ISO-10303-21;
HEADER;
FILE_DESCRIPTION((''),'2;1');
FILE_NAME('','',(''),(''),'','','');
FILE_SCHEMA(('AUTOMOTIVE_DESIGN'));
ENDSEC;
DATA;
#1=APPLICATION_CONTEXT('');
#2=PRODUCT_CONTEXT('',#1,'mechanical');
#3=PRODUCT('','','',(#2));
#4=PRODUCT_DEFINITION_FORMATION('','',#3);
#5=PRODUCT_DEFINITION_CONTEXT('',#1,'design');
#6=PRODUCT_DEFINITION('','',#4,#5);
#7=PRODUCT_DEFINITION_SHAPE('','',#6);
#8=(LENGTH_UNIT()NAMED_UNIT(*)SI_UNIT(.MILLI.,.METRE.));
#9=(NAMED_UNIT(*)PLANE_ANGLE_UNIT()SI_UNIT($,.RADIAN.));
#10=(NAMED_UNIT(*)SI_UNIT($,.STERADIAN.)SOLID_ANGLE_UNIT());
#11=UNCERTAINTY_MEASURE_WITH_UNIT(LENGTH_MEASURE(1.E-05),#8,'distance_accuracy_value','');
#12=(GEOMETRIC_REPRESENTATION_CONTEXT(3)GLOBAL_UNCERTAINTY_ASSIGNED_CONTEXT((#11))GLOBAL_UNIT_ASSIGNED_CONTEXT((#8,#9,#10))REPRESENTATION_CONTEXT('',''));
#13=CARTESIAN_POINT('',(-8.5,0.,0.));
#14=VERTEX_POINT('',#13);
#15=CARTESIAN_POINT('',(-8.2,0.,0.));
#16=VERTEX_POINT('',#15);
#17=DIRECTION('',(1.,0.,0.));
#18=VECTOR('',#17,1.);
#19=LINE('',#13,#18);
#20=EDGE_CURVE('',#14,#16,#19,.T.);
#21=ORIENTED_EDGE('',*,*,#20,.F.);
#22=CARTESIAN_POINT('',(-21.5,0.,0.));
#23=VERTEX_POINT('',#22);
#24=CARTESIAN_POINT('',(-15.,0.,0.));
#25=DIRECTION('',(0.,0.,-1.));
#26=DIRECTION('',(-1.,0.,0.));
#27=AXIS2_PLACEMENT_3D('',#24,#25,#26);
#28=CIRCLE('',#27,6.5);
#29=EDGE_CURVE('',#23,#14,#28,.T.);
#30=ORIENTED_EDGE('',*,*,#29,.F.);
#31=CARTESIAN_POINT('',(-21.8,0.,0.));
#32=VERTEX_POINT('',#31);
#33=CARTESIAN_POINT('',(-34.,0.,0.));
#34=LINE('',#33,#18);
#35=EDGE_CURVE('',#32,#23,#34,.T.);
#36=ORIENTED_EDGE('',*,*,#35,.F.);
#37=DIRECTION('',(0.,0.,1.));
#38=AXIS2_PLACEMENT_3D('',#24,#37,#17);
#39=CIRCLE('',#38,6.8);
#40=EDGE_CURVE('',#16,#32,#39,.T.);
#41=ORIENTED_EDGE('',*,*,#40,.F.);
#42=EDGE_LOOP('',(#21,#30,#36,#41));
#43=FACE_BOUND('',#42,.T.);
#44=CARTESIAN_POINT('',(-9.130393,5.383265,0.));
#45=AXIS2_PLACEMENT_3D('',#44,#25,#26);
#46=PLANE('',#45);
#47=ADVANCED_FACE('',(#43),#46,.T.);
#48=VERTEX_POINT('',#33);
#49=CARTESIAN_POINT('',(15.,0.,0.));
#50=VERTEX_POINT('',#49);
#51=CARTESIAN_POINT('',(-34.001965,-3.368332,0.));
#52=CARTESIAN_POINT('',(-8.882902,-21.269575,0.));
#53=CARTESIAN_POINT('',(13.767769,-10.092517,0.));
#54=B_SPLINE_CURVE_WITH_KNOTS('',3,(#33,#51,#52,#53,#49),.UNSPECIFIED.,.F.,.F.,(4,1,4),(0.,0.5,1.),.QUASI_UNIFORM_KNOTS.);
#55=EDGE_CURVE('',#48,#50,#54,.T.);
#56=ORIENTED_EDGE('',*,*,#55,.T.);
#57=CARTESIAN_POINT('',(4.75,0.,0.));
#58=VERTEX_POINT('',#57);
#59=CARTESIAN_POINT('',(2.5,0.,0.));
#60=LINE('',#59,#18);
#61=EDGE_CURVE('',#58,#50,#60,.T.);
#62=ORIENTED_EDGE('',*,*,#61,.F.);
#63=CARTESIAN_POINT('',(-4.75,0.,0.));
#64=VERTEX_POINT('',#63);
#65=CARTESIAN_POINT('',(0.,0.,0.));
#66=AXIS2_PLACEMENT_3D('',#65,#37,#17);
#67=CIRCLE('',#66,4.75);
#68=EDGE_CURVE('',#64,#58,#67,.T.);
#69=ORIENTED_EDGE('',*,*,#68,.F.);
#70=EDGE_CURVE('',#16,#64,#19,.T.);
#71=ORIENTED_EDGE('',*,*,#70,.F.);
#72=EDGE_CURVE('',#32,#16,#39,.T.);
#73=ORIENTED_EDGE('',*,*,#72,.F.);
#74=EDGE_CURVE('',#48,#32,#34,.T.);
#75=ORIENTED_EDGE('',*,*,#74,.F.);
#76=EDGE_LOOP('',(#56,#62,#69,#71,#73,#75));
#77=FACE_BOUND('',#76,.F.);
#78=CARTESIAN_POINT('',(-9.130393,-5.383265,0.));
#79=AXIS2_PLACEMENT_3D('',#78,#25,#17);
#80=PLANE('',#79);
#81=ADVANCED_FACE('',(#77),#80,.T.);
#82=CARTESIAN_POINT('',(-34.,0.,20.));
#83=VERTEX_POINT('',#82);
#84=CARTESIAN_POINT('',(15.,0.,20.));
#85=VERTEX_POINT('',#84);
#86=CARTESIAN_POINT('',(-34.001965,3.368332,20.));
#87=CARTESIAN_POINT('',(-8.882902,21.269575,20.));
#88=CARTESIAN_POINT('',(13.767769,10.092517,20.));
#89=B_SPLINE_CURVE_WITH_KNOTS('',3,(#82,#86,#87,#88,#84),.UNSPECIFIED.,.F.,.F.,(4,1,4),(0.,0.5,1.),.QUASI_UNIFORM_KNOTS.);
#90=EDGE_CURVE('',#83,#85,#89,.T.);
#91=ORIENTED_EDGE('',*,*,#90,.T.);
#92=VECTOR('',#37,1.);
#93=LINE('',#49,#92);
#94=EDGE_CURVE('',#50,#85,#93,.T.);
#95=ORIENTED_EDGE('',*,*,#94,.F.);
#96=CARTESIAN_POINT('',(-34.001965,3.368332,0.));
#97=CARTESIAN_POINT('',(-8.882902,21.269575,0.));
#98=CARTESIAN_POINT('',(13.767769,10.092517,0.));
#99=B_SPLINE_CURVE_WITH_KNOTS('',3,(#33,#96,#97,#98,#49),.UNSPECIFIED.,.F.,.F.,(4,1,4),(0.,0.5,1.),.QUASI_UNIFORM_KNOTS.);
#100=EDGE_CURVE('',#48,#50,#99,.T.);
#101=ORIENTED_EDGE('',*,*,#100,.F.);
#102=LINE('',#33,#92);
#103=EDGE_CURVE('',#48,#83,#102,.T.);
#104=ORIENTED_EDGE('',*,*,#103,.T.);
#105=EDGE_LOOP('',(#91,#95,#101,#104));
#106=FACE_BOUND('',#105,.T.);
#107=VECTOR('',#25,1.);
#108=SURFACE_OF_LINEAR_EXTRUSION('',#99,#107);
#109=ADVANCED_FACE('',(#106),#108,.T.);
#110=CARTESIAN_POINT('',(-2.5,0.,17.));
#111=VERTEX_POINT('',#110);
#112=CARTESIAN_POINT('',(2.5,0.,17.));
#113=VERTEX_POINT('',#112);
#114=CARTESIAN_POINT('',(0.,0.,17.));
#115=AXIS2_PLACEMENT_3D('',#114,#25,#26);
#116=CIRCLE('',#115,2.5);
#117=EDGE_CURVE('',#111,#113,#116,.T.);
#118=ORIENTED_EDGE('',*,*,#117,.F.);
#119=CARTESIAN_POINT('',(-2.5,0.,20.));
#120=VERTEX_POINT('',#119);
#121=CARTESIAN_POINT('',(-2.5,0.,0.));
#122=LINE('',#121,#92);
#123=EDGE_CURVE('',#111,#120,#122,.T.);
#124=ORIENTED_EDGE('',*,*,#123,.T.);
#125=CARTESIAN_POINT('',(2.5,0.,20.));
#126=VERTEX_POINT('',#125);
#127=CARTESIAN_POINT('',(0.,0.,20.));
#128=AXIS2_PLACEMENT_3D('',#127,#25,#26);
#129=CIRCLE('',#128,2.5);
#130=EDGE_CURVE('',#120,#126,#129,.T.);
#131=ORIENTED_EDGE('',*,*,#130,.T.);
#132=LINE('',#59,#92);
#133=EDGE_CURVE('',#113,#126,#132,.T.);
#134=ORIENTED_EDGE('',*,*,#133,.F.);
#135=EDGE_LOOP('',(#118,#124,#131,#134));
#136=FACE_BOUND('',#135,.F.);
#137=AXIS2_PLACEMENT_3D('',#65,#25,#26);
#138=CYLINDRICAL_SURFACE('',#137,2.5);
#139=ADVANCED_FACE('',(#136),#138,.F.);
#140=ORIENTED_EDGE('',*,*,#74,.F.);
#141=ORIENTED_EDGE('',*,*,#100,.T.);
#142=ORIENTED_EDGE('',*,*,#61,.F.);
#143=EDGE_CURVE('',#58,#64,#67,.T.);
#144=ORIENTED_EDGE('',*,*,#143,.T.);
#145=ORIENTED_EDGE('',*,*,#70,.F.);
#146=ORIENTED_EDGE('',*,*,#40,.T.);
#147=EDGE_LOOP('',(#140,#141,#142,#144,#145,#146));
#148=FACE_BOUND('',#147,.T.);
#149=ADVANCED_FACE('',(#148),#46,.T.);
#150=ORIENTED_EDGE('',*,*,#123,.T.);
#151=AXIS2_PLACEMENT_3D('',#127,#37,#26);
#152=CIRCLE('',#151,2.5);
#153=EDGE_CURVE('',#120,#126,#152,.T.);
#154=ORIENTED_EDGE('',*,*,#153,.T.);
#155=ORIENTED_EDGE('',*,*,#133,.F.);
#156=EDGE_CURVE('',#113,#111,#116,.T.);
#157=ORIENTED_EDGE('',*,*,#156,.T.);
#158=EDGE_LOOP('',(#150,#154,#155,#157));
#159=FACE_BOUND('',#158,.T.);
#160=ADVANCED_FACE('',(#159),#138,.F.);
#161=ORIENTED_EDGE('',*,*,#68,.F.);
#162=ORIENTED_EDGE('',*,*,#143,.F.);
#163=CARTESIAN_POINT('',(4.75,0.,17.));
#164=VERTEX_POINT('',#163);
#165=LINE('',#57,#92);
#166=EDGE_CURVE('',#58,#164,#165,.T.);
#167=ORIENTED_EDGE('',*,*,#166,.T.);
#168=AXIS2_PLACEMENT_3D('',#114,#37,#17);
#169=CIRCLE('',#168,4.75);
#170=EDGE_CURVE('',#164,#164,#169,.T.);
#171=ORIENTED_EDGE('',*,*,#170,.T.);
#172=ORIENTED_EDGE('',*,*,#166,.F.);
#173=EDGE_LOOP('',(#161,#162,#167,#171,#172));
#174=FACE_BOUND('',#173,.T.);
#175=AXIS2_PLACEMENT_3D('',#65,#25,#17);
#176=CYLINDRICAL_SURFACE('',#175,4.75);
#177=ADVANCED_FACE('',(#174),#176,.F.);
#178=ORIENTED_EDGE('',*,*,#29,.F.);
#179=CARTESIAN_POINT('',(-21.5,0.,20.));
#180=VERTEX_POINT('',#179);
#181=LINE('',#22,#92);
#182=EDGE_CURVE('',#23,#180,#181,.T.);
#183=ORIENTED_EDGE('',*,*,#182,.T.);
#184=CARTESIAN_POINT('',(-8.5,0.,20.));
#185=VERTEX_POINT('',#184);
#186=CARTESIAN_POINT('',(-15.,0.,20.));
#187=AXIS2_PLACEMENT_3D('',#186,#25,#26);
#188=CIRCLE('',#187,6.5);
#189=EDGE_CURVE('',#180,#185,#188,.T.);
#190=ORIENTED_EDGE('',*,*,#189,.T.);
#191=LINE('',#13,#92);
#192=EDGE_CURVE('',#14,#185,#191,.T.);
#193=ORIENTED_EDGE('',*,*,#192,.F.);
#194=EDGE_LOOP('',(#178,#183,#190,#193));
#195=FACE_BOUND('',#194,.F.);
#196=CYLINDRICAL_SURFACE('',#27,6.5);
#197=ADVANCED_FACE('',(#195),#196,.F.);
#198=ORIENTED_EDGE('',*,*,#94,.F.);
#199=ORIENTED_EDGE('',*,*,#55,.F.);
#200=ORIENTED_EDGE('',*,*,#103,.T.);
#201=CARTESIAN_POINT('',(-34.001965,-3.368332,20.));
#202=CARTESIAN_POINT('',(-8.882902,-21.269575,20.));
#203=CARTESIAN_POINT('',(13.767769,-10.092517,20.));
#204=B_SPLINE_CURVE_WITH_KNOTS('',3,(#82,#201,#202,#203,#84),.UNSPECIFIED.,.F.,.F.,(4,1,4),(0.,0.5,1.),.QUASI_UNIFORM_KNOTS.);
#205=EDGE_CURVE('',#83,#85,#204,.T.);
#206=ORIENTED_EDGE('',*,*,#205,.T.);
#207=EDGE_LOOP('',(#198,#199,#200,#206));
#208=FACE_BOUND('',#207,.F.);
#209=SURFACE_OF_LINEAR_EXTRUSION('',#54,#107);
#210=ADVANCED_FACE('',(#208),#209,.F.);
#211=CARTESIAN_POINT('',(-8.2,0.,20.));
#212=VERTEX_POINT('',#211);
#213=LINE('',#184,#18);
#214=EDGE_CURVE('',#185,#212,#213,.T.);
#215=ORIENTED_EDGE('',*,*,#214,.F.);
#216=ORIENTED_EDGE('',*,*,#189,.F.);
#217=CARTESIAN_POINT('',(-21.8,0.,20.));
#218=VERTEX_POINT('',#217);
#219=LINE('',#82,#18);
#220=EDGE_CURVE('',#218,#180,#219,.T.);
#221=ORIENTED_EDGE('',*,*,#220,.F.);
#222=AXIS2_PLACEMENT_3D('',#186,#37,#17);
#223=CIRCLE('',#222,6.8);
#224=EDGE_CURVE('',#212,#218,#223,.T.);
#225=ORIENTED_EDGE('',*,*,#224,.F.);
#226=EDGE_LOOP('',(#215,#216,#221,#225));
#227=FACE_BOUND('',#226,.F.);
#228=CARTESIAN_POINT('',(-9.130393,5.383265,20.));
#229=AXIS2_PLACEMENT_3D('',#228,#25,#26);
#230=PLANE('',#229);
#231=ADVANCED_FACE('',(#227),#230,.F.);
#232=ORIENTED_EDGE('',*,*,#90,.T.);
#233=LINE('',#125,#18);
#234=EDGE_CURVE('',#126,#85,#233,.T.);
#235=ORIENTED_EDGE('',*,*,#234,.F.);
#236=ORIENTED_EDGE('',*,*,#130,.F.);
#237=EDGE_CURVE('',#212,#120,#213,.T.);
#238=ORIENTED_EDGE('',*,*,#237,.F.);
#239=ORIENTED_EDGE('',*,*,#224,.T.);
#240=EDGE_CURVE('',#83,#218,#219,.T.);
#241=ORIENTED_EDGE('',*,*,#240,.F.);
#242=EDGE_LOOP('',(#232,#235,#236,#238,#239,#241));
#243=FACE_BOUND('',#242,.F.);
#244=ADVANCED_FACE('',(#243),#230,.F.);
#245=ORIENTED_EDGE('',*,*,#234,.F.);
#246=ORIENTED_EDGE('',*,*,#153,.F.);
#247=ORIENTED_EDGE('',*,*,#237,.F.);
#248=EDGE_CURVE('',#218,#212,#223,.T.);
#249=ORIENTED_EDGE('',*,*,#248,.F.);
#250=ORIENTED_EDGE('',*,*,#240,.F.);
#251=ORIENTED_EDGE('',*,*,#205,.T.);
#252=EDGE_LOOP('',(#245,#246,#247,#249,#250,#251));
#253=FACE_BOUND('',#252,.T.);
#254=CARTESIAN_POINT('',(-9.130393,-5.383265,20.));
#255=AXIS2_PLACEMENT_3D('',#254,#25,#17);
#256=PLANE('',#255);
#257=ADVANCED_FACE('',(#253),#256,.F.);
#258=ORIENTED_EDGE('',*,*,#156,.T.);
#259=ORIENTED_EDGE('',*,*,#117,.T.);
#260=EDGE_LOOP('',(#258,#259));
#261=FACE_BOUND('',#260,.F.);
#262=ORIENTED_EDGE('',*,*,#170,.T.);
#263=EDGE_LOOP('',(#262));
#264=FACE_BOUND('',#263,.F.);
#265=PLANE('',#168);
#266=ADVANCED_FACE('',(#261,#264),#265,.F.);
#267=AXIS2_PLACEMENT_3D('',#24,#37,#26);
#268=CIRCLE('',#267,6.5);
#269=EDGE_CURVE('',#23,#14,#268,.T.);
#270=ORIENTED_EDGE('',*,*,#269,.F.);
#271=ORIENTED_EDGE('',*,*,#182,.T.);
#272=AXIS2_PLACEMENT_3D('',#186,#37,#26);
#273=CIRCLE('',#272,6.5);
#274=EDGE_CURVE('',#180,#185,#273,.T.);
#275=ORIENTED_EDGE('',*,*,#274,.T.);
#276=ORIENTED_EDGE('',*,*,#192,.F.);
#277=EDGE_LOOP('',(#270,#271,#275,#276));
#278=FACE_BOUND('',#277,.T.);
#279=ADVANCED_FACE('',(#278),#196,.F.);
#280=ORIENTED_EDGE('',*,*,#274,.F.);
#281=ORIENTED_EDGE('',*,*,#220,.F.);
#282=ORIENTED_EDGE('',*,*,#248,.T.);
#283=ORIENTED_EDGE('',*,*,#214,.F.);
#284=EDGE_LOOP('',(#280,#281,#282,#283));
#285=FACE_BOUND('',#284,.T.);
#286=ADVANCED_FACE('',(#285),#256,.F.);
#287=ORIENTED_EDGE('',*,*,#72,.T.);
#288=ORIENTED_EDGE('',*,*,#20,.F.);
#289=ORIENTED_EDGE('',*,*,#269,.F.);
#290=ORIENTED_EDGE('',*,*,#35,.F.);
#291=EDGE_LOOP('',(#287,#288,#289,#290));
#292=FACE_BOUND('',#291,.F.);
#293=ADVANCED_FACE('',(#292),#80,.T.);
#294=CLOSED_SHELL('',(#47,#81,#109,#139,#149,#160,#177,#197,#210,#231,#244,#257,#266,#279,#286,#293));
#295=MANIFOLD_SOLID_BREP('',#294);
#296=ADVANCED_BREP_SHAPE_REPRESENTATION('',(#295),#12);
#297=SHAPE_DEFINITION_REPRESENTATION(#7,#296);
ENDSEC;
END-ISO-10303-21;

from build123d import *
from build123d import SkipClean  # not in build123d's __all__

# Parameters (mm, degrees)
F1_DEPTH = 20
F3_R     = 6.8
F3_R_2   = 6.5
F4_DEPTH = 20
F5_R     = 4.75
F6_DEPTH = 17


with BuildPart() as f1:
    # F0 (on Top) → F1 (new body)
    with BuildSketch(Plane.XY):
        with BuildLine():
            add(Edge.make_bspline(
                [(-34, 0), (-34.0019650757, 3.3683322836), (-8.8829017766, 21.2695751777), (13.7677686289, 10.092517361), (15, 0)],
                knots=[0, 0, 0, 0, 0.5, 1, 1, 1, 1], degree=3))
            Line((-34, 0), (-21.5, 0))
            ThreePointArc((-21.5, 0), (-15, 6.5), (-8.5, 0))
            Line((-8.5, 0), (-2.5, 0))
            ThreePointArc((-2.5, 0), (0, 2.5), (2.5, 0))
            Line((2.5, 0), (15, 0))
        make_face()
    extrude(amount=F1_DEPTH)

    # F2: F1 across plane


with BuildPart() as f1_1:
    add(f1.part, clean=False)
    with SkipClean():  # cleaning this boolean's faces spoils the solid; the shape is the same uncleaned
        add(f1.part.mirror(Plane.XZ), clean=False)

    # F3 (on Top) → F4 (join)
    with BuildSketch(Plane.XY):
        with Locations((-15, 0)):
            Circle(F3_R)
        with Locations((-15, 0)):
            Circle(F3_R_2, mode=Mode.SUBTRACT)
    with SkipClean():  # cleaning this boolean's faces spoils the solid; the shape is the same uncleaned
        extrude(amount=F4_DEPTH)


with BuildPart() as f6:
    # F5 (on Top) → F6 (new body)
    with BuildSketch(Plane.XY):
        Circle(F5_R)
    extrude(amount=F6_DEPTH)


with BuildPart() as f1_2:
    add(f1_1.part, clean=False)

    # F7: cut F6
    add(f6.part, mode=Mode.SUBTRACT)


solid = f1_2.part
